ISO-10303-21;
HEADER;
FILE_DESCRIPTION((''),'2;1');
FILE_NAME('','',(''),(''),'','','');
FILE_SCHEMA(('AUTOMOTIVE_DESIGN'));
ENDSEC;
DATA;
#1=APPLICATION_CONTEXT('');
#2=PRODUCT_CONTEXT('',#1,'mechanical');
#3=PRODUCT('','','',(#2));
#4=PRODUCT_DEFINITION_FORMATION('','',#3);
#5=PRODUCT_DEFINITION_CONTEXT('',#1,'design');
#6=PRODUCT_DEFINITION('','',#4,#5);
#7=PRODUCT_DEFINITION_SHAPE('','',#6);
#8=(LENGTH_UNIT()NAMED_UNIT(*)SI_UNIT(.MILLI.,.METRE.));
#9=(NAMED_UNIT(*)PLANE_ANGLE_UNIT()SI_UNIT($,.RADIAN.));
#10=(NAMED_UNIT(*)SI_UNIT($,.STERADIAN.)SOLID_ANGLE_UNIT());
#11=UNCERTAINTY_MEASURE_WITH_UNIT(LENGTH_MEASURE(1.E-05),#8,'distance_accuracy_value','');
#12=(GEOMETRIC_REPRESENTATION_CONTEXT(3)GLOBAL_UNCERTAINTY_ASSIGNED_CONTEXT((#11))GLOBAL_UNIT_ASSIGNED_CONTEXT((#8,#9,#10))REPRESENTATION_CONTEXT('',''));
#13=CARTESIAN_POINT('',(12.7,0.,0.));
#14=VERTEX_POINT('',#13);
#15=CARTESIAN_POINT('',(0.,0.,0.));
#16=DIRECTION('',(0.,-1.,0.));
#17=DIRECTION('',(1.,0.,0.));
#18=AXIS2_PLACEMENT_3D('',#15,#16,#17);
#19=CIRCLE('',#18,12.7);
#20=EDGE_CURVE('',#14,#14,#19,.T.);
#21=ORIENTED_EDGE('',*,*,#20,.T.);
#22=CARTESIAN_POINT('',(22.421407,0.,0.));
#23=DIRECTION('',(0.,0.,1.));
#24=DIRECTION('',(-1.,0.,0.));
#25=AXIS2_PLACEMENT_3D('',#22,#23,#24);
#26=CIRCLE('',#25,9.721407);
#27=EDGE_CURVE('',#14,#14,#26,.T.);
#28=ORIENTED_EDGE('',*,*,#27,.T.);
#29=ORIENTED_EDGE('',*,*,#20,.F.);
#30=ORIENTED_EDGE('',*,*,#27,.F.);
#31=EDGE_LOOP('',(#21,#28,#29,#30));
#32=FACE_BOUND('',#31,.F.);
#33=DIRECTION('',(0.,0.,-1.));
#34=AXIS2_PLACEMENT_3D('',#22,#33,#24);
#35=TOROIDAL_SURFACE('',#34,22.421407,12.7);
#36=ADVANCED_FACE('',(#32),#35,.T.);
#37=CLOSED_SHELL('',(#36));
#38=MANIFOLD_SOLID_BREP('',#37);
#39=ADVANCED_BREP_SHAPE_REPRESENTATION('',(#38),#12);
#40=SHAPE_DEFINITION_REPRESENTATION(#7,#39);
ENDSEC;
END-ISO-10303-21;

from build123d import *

# Parameters (mm, degrees)
F0_R = 12.7


# Not quite as in the source:
# - a feature of the source that left no trace in its solid (it failed there, or was rolled back) is left out


with BuildPart() as f1:
    # F0 (on Front) → F1 (revolve)
    with BuildSketch(Plane.XZ):
        Circle(F0_R)
    revolve(axis=Axis((22.421406582, 0, 12.001499068), (0, 0, 1)))


solid = f1.part
